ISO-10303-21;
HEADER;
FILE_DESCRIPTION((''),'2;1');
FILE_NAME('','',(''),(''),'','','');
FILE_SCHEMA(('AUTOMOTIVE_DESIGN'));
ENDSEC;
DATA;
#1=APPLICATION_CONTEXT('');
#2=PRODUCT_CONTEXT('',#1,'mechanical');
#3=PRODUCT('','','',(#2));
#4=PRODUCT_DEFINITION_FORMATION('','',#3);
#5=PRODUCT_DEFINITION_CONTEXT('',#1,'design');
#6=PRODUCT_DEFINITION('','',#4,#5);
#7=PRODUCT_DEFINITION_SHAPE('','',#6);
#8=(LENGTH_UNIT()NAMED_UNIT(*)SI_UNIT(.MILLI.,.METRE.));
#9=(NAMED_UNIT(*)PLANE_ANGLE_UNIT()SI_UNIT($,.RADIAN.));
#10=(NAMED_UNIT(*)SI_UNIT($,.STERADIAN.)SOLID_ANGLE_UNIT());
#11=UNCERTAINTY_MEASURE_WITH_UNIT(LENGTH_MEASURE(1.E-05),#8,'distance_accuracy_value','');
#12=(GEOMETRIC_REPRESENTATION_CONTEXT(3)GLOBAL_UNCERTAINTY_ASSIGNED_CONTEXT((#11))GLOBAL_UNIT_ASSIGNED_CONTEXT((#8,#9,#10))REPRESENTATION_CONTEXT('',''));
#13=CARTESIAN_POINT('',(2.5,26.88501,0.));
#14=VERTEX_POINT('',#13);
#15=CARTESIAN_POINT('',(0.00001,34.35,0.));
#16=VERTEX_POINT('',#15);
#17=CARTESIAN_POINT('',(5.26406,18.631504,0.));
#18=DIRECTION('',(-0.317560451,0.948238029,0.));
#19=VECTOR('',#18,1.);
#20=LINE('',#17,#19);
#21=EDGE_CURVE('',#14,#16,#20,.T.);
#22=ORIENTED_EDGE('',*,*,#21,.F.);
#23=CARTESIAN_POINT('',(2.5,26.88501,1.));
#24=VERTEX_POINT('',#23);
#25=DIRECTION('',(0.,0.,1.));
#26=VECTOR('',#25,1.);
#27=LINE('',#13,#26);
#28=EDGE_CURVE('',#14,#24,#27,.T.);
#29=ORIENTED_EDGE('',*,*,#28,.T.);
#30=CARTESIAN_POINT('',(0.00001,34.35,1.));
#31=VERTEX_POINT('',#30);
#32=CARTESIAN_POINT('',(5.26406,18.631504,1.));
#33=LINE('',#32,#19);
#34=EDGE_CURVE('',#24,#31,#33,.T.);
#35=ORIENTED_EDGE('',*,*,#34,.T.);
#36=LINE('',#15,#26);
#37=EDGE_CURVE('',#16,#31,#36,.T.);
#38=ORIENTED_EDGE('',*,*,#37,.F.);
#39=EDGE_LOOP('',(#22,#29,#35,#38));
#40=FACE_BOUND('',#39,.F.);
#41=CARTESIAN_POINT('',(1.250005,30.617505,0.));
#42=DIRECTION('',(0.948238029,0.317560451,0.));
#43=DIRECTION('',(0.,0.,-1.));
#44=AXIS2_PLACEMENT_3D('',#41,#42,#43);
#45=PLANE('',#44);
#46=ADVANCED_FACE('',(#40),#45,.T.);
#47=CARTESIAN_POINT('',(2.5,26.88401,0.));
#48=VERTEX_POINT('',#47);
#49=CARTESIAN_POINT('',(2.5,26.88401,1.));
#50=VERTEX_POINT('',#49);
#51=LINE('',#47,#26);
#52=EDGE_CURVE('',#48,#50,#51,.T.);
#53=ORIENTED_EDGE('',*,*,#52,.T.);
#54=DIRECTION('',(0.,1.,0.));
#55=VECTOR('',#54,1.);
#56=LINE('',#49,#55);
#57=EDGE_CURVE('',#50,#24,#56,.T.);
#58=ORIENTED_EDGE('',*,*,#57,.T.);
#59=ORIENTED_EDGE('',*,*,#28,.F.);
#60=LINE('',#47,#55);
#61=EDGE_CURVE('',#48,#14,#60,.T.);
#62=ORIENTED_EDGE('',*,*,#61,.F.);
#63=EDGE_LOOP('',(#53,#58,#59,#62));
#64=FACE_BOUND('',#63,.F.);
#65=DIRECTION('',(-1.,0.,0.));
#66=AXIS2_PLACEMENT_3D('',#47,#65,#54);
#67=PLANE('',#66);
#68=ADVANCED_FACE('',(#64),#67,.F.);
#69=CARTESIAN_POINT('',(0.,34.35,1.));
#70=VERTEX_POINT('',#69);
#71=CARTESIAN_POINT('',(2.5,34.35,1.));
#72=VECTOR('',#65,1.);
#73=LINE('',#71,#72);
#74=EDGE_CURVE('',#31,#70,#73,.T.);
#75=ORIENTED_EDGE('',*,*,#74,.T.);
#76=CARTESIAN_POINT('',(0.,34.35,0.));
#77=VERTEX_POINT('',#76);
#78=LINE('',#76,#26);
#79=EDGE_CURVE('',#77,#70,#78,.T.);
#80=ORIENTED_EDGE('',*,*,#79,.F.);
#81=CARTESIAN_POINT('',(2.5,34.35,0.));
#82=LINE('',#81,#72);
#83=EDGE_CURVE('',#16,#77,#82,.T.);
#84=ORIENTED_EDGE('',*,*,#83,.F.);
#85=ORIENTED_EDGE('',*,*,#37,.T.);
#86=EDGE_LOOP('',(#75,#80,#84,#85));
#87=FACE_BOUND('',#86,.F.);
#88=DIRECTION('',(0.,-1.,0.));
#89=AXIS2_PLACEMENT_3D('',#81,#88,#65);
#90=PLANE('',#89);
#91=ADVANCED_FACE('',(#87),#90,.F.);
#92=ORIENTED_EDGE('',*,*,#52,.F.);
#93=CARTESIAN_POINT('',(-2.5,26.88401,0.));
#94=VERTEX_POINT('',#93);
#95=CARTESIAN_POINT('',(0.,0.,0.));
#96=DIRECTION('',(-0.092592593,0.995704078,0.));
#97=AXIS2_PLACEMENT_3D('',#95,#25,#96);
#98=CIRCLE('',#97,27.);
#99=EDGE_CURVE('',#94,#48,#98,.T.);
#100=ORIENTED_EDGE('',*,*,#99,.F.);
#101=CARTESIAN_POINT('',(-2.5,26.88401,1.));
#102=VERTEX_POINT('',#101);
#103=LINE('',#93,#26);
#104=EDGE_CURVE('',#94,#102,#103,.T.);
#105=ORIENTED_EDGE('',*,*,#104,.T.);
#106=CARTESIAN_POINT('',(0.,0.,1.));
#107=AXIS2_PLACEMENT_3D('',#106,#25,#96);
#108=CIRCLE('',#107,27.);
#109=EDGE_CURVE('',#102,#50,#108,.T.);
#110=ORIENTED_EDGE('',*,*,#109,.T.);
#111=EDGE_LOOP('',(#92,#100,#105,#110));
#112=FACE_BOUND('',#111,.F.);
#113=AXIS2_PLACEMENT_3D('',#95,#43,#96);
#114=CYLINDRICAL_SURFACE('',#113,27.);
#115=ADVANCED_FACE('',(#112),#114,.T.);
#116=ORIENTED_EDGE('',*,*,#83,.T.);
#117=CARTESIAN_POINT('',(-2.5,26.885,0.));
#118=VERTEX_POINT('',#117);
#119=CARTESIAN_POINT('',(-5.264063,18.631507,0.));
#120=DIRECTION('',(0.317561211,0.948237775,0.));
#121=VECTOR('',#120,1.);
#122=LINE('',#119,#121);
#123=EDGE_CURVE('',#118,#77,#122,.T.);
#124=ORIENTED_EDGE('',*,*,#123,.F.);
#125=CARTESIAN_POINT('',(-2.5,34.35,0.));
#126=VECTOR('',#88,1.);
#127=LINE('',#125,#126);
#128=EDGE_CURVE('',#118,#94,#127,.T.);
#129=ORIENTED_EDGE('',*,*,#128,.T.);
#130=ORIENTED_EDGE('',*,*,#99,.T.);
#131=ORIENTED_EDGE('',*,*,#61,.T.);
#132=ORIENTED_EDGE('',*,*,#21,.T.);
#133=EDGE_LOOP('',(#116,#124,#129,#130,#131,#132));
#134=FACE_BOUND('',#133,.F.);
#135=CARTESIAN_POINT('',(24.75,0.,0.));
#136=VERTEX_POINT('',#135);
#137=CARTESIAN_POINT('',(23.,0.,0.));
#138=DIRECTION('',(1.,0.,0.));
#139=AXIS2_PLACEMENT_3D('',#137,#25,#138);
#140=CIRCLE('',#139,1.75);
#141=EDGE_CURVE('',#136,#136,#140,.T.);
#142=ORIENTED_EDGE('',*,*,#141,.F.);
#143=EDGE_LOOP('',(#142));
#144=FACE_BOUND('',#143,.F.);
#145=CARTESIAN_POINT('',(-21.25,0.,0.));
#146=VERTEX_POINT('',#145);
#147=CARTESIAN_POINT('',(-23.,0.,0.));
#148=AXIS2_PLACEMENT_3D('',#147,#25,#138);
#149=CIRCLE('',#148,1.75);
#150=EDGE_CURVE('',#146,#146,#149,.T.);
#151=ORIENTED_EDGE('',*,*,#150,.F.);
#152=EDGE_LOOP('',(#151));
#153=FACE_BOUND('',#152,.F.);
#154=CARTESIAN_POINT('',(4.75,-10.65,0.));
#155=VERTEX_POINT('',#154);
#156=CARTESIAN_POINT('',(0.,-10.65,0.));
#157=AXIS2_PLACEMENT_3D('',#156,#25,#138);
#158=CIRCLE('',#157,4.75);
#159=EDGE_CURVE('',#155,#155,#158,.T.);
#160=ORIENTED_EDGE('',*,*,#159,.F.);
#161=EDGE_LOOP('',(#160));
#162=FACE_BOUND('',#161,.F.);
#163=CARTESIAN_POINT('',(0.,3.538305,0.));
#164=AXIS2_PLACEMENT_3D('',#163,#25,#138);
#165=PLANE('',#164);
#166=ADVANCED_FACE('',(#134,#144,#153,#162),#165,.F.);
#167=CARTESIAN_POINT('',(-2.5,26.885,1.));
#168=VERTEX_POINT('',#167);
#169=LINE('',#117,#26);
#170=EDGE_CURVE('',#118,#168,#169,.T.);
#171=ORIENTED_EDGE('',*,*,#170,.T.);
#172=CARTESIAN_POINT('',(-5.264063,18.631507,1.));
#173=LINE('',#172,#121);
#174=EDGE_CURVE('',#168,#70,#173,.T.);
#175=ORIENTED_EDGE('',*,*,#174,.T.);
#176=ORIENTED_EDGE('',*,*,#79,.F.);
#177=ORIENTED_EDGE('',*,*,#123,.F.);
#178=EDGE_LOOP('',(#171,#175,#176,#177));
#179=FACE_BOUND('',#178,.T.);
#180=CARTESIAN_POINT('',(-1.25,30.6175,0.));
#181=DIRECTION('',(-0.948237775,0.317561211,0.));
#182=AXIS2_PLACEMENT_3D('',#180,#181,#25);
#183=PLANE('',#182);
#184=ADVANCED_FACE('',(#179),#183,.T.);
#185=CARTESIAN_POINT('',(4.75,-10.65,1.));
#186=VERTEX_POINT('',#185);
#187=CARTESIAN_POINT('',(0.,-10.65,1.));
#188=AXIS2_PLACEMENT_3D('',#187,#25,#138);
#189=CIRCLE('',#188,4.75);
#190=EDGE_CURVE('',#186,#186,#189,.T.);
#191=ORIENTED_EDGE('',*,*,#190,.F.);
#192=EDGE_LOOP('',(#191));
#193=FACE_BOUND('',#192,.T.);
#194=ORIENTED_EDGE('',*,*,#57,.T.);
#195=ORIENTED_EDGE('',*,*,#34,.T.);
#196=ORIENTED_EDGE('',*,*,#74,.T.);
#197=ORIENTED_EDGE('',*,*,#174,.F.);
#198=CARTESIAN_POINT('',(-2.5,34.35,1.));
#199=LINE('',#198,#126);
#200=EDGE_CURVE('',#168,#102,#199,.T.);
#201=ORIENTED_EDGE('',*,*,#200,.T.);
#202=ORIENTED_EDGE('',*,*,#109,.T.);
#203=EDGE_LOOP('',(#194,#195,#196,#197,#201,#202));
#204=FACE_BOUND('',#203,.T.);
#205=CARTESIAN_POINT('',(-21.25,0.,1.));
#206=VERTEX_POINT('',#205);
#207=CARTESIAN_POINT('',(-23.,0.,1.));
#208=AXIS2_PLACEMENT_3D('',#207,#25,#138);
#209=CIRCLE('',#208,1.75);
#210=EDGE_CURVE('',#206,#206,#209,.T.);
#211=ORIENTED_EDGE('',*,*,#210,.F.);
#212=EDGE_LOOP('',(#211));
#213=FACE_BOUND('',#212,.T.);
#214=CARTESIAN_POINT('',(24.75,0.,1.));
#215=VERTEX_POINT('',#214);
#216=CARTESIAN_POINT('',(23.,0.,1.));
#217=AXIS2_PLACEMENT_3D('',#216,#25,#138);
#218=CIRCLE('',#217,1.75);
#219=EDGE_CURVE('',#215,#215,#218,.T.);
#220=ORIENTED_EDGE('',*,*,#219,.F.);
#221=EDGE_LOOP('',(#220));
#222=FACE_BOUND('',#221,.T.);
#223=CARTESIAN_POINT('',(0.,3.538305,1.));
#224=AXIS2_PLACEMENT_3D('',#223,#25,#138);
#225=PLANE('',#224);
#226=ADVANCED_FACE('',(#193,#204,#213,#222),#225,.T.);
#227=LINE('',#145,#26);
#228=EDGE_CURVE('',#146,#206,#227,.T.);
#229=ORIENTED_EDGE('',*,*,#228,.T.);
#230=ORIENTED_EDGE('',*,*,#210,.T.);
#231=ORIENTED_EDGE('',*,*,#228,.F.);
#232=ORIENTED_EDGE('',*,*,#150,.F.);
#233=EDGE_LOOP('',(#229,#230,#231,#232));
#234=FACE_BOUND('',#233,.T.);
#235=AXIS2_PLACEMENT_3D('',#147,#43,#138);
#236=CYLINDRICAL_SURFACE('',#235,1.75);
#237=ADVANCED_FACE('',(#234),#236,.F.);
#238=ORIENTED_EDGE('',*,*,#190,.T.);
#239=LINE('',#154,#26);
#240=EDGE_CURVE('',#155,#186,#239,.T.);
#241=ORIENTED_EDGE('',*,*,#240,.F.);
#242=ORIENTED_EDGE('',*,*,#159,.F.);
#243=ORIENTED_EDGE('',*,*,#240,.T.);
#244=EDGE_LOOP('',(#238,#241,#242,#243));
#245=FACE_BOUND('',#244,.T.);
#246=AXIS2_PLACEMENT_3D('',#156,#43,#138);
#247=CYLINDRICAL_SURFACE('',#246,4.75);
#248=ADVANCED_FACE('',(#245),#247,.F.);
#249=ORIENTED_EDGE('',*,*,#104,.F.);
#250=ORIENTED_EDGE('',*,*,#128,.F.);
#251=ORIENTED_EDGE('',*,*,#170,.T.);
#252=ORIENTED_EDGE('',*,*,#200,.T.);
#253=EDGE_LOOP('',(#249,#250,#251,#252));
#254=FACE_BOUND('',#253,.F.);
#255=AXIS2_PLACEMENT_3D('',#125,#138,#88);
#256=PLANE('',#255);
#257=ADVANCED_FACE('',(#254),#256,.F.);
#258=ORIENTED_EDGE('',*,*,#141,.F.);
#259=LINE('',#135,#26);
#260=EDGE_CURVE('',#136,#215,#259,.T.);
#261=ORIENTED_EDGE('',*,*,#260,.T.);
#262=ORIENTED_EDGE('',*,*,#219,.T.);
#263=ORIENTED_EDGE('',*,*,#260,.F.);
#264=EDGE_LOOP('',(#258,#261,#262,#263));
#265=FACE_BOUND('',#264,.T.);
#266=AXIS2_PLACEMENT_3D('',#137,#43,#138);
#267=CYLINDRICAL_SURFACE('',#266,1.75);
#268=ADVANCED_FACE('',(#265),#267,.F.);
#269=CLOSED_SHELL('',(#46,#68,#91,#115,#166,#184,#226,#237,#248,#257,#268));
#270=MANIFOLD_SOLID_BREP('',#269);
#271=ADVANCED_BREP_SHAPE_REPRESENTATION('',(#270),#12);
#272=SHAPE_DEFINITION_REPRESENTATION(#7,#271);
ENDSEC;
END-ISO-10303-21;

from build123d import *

# Parameters (mm, degrees)
F0_R       = 1.75
F0_R_2     = 4.75
F1_DEPTH   = 1
F2_SIZE2   = 2.5
F2_SIZE    = 7.465
F2_2_SIZE2 = 2.49999
F2_2_SIZE  = 7.46499


# Not quite as in the source:
# - a fillet or chamfer is up to 0.001 mm smaller than in the source, because OpenCascade refuses the exact size


with BuildPart() as f1:
    # F0 (on Top) → F1 (new body)
    with BuildSketch(Plane.XY):
        with BuildLine():
            Line((-2.5, 34.35), (-2.5, 26.8840101175))
            ThreePointArc((-2.5, 26.8840101175), (0, -27), (2.5, 26.8840101175))
            Line((2.5, 26.8840101175), (2.5, 34.35))
            Line((2.5, 34.35), (-2.5, 34.35))
        make_face()
        with Locations((-23, 0)):
            Circle(F0_R, mode=Mode.SUBTRACT)
        with Locations((0, -10.65)):
            Circle(F0_R_2, mode=Mode.SUBTRACT)
        with Locations((23, 0)):
            Circle(F0_R, mode=Mode.SUBTRACT)
    extrude(amount=F1_DEPTH)

    # F2
    f2_edges = [f1.edges().sort_by_distance(p)[0] for p in [
        (-2.5, 34.35, 0.5),
    ]]
    f2_side = f1.faces().sort_by_distance((-2.5, 30.617005, 0.5))[0]
    chamfer(f2_edges, length=F2_SIZE, length2=F2_SIZE2, reference=f2_side)

    # F2#2 (size 7.465 and 2.5 in the source; OpenCascade refuses exactly that, so slightly less here)
    f2_2_edges = [f1.edges().sort_by_distance(p)[0] for p in [
        (2.5, 34.35, 0.5),
    ]]
    f2_2_side = f1.faces().sort_by_distance((2.5, 30.617005, 0.5))[0]
    chamfer(f2_2_edges, length=F2_2_SIZE, length2=F2_2_SIZE2, reference=f2_2_side)


solid = f1.part
